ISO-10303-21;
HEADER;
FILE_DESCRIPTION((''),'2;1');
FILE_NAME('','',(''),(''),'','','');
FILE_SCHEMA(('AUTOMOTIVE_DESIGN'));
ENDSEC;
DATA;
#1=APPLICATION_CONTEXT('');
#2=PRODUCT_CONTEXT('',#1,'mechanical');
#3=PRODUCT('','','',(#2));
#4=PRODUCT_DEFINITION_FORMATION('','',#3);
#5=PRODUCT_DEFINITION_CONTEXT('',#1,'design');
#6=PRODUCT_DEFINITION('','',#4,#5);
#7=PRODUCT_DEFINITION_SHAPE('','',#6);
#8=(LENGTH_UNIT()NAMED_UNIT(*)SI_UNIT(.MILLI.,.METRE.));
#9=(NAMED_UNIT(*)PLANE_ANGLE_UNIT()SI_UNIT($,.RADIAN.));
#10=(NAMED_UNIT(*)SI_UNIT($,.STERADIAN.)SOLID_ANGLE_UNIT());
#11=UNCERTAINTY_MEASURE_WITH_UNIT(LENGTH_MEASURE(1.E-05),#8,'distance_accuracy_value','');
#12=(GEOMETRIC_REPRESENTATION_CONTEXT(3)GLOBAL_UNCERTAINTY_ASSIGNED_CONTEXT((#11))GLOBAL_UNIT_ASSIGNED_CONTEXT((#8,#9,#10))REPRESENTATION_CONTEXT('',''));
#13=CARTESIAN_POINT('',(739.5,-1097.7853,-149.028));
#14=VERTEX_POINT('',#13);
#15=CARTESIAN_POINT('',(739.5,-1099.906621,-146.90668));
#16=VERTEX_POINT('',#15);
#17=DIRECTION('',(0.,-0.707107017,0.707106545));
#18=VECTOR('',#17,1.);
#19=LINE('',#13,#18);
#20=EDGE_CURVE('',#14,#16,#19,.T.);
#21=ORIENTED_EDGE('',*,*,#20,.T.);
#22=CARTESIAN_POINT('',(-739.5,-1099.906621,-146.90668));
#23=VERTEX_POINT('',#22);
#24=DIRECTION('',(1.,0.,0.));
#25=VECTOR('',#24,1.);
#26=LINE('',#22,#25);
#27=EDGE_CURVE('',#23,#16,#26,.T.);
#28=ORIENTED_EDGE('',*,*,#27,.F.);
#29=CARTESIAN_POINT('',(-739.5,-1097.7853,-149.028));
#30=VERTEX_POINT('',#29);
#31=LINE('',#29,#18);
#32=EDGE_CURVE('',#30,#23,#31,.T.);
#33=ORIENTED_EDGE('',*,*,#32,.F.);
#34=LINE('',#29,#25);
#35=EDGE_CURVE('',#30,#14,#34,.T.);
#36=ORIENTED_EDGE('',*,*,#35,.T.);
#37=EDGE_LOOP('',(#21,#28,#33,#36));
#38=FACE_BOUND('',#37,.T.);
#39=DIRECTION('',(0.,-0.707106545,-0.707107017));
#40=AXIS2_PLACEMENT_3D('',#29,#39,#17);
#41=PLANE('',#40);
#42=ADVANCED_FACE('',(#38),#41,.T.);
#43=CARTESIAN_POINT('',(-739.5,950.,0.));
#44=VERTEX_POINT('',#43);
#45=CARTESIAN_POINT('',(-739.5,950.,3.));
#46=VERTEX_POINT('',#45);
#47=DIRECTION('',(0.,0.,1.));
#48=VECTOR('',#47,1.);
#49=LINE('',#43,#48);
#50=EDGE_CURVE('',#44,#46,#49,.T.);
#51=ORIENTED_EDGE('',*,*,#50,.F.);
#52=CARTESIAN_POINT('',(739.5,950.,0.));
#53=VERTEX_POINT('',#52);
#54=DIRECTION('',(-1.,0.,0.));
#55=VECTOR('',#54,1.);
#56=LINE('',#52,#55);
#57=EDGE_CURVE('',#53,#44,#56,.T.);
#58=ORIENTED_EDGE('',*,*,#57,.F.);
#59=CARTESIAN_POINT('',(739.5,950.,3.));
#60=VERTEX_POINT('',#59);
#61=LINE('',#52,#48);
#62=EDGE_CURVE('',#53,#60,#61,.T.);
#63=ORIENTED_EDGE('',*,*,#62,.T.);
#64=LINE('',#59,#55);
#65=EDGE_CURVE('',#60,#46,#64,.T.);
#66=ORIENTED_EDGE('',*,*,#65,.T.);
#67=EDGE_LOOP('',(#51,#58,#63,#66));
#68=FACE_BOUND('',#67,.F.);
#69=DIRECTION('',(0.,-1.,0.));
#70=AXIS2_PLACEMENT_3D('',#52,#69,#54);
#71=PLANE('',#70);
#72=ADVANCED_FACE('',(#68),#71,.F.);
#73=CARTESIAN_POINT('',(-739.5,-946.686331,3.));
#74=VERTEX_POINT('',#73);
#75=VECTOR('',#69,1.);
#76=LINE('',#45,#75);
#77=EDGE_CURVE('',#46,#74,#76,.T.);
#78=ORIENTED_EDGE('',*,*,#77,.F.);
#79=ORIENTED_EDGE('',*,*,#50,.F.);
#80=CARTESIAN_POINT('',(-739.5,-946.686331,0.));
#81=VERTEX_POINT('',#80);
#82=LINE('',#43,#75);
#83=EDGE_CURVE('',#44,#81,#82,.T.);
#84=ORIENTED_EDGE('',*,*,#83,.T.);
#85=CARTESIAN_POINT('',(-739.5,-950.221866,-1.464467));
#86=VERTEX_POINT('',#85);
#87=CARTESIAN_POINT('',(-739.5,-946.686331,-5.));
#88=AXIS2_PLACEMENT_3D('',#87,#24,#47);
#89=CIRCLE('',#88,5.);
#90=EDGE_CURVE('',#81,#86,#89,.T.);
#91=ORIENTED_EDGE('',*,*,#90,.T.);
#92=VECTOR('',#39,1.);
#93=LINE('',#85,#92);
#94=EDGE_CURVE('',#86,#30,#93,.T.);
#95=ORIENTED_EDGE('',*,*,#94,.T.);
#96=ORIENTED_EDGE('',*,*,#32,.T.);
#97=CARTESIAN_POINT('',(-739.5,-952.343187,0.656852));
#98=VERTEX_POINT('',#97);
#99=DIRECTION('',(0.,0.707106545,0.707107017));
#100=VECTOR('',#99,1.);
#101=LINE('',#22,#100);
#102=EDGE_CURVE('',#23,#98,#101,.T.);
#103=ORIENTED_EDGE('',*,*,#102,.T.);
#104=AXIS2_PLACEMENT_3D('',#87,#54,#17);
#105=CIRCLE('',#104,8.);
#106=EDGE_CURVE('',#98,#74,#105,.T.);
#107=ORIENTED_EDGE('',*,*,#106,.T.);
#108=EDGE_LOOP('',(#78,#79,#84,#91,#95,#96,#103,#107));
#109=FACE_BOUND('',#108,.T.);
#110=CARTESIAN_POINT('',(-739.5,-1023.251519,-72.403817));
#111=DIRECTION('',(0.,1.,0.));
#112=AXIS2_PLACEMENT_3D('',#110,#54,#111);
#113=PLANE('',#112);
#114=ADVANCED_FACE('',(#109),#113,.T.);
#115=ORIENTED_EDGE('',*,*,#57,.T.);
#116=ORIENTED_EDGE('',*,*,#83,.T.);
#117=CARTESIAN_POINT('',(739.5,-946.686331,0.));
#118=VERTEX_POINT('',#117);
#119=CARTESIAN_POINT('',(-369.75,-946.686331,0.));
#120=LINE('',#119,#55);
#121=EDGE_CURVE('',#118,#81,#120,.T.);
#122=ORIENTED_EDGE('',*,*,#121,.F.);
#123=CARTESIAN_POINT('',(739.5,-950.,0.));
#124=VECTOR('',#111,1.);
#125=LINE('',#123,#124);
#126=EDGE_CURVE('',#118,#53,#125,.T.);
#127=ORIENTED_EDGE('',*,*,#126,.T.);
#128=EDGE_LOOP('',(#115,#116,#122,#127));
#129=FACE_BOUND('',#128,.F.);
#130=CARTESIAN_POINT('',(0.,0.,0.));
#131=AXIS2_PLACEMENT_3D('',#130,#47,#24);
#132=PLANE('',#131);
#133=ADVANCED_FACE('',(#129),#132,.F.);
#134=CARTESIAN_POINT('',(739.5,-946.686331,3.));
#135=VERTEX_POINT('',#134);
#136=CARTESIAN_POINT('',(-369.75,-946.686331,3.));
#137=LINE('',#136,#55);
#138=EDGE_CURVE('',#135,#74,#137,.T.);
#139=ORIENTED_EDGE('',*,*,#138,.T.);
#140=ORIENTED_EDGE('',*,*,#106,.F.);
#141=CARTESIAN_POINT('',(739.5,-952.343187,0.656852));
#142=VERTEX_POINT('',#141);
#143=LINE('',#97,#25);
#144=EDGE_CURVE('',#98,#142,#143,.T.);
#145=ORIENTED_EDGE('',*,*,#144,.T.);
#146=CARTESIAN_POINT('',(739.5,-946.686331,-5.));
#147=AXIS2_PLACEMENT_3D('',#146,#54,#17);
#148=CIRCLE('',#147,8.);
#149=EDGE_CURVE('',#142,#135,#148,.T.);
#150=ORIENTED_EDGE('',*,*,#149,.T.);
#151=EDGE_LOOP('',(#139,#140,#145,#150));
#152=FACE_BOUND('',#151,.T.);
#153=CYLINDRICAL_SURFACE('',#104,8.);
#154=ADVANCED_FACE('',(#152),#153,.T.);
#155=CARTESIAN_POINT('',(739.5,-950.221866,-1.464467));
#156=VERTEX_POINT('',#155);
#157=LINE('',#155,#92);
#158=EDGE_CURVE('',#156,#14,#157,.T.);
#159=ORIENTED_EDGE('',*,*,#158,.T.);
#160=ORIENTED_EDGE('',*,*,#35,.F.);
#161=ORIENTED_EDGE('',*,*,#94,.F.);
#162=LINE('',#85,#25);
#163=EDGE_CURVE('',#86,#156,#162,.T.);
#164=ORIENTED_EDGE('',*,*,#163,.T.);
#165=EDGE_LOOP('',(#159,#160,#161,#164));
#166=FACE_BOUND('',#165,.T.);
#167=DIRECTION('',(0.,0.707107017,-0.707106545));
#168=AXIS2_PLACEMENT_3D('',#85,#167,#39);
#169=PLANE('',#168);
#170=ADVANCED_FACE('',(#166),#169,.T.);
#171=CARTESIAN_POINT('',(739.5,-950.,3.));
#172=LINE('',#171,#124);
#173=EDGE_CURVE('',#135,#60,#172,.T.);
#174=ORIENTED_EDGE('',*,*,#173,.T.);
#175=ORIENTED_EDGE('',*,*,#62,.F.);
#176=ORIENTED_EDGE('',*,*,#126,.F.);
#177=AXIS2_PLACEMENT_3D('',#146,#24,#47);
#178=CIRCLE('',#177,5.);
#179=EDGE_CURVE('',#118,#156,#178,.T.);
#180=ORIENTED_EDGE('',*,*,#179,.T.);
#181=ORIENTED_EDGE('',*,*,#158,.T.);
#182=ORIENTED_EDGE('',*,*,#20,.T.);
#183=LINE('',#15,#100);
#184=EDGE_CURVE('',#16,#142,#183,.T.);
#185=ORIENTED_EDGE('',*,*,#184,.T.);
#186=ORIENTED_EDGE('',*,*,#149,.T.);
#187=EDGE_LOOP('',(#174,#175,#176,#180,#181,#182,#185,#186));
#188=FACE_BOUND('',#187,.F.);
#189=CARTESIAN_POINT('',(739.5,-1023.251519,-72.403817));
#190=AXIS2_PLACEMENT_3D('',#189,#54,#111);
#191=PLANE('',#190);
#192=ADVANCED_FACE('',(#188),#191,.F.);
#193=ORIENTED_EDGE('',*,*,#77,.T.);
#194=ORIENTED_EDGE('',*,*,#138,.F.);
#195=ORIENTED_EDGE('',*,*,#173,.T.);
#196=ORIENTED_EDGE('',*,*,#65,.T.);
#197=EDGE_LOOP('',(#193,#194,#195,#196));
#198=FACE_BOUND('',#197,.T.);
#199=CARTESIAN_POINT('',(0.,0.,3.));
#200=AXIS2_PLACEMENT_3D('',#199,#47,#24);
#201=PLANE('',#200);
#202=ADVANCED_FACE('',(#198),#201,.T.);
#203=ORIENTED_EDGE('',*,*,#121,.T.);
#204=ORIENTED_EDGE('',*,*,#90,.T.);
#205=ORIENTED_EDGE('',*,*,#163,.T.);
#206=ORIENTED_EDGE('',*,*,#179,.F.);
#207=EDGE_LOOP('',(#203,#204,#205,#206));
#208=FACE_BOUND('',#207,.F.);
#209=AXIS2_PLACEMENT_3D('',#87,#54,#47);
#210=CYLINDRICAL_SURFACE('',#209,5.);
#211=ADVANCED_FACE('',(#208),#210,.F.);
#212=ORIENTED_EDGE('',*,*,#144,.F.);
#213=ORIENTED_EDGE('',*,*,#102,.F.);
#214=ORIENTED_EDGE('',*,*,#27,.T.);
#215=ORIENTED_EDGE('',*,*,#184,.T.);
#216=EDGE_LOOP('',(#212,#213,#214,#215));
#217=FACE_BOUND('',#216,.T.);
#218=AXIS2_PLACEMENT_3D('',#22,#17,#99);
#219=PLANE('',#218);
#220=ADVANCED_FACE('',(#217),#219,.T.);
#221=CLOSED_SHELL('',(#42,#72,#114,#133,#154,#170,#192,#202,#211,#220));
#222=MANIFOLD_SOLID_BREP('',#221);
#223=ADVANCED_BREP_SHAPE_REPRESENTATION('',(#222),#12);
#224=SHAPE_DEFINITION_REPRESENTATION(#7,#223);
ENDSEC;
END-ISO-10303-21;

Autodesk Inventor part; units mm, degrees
ref_plane "YZ Plane" through (0, 0, 0) normal (1, 0, 0) x (0, 1, 0)
ref_plane "XZ Plane" through (0, 0, 0) normal (0, 1, 0) x (-1, 0, 0)
ref_plane "XY Plane" through (0, 0, 0) normal (0, 0, 1) x (1, 0, 0)
sketch "Sketch1" plane through (0, 0, 0) normal (0, 0, 1) x (1, 0, 0)
  line L0 (-739.5, -950) -> (739.5, -950)
  line L1 (739.5, -950) -> (739.5, 950)
  line L2 (739.5, 950) -> (-739.5, 950)
  line L3 (-739.5, 950) -> (-739.5, -950)
  line L4 (-739.5, -950) -> (739.5, 950) construction
  line L5 (739.5, -950) -> (-739.5, 950) construction
  point P0 (0, 0)
  dimension "d0" = 1479
  dimension "d1" = 1900
extrude "Plate1" add sketch "Sketch1" along normal blind 3
sketch "Sketch3" plane through (-739.5, -947.8787, 0.8787) normal (0, -0.7071068, 0.7071068) x (1, 0, 0)
  line L0 (1479, 0) -> (0, 0)
  line L1 (0, 0) -> (0, -212)
  line L2 (0, -212) -> (1479, -212)
  line L3 (1479, -212) -> (1479, 0)
edge flange "Flange2" height 212 angle 45 thickness 3 bend radius 5 thickness toward (0, -0.7071068, 0.7071068) relief round relief width 3 relief depth 1.5 edges at (0, -950, 0) wall of the first edge with corners at (739.5, -947.8787, 0.8787) (-739.5, -947.8787, 0.8787) (-739.5, -1097.7853, -149.028) (739.5, -1097.7853, -149.028)
bend "Bend2"
corner "Corner2"
sketch "Sketch4" plane through (739.5, -1097.7853, -149.028) normal (0, 0.7071068, -0.7071068) x (-1, 0, 0)
  line L0 (1454, 36.661) -> (1454, 25) construction
  line L1 (1454, 25) -> (1254, 25) construction
  line L2 (1254, 25) -> (1254, 36.661) construction
  line L3 (1254, 36.661) -> (1454, 36.661) construction
  line L4 (0, 0) -> (1479, 0) projected
  line L5 (1479, 208.6863) -> (1479, 0) projected
  point P0 (739.5, 881.6301)
  point P1 (1454, 30.8305)
  dimension "d23" = 200
  dimension "d24" = 11.661
  dimension "d25" = 25
  dimension "d26" = 25
mark "Mark1"
equation "\"d2\" = Thickness"
equation "\"d13\" = BendReliefWidth"
equation "\"d14\" = BendReliefDepth"
equation "\"d15\" = MinimumRemnant"
equation "\"d16\" = TransitionRadius"
equation "\"d19\" = BendRadius"
equation "\"d20\" = CornerReliefSize"
equation "\"d21\" = GapSize"
equation "\"d22\" = JacobiRadiusSize"
equation "\"BendReliefWidth\" = Thickness"
equation "\"BendReliefDepth\" = 0.5 * Thickness"
equation "\"CornerReliefSize\" = 4 * Thickness"
equation "\"MinimumRemnant\" = 2 * Thickness"
equation "\"TransitionRadius\" = BendRadius"
equation "\"JacobiRadiusSize\" = BendRadius"
equation "\"GapSize\" = Thickness"
equation "\"Thickness\" = 3"
equation "\"BendRadius\" = 5"
properties part number "BSH 012 floor" material "09g2s"
